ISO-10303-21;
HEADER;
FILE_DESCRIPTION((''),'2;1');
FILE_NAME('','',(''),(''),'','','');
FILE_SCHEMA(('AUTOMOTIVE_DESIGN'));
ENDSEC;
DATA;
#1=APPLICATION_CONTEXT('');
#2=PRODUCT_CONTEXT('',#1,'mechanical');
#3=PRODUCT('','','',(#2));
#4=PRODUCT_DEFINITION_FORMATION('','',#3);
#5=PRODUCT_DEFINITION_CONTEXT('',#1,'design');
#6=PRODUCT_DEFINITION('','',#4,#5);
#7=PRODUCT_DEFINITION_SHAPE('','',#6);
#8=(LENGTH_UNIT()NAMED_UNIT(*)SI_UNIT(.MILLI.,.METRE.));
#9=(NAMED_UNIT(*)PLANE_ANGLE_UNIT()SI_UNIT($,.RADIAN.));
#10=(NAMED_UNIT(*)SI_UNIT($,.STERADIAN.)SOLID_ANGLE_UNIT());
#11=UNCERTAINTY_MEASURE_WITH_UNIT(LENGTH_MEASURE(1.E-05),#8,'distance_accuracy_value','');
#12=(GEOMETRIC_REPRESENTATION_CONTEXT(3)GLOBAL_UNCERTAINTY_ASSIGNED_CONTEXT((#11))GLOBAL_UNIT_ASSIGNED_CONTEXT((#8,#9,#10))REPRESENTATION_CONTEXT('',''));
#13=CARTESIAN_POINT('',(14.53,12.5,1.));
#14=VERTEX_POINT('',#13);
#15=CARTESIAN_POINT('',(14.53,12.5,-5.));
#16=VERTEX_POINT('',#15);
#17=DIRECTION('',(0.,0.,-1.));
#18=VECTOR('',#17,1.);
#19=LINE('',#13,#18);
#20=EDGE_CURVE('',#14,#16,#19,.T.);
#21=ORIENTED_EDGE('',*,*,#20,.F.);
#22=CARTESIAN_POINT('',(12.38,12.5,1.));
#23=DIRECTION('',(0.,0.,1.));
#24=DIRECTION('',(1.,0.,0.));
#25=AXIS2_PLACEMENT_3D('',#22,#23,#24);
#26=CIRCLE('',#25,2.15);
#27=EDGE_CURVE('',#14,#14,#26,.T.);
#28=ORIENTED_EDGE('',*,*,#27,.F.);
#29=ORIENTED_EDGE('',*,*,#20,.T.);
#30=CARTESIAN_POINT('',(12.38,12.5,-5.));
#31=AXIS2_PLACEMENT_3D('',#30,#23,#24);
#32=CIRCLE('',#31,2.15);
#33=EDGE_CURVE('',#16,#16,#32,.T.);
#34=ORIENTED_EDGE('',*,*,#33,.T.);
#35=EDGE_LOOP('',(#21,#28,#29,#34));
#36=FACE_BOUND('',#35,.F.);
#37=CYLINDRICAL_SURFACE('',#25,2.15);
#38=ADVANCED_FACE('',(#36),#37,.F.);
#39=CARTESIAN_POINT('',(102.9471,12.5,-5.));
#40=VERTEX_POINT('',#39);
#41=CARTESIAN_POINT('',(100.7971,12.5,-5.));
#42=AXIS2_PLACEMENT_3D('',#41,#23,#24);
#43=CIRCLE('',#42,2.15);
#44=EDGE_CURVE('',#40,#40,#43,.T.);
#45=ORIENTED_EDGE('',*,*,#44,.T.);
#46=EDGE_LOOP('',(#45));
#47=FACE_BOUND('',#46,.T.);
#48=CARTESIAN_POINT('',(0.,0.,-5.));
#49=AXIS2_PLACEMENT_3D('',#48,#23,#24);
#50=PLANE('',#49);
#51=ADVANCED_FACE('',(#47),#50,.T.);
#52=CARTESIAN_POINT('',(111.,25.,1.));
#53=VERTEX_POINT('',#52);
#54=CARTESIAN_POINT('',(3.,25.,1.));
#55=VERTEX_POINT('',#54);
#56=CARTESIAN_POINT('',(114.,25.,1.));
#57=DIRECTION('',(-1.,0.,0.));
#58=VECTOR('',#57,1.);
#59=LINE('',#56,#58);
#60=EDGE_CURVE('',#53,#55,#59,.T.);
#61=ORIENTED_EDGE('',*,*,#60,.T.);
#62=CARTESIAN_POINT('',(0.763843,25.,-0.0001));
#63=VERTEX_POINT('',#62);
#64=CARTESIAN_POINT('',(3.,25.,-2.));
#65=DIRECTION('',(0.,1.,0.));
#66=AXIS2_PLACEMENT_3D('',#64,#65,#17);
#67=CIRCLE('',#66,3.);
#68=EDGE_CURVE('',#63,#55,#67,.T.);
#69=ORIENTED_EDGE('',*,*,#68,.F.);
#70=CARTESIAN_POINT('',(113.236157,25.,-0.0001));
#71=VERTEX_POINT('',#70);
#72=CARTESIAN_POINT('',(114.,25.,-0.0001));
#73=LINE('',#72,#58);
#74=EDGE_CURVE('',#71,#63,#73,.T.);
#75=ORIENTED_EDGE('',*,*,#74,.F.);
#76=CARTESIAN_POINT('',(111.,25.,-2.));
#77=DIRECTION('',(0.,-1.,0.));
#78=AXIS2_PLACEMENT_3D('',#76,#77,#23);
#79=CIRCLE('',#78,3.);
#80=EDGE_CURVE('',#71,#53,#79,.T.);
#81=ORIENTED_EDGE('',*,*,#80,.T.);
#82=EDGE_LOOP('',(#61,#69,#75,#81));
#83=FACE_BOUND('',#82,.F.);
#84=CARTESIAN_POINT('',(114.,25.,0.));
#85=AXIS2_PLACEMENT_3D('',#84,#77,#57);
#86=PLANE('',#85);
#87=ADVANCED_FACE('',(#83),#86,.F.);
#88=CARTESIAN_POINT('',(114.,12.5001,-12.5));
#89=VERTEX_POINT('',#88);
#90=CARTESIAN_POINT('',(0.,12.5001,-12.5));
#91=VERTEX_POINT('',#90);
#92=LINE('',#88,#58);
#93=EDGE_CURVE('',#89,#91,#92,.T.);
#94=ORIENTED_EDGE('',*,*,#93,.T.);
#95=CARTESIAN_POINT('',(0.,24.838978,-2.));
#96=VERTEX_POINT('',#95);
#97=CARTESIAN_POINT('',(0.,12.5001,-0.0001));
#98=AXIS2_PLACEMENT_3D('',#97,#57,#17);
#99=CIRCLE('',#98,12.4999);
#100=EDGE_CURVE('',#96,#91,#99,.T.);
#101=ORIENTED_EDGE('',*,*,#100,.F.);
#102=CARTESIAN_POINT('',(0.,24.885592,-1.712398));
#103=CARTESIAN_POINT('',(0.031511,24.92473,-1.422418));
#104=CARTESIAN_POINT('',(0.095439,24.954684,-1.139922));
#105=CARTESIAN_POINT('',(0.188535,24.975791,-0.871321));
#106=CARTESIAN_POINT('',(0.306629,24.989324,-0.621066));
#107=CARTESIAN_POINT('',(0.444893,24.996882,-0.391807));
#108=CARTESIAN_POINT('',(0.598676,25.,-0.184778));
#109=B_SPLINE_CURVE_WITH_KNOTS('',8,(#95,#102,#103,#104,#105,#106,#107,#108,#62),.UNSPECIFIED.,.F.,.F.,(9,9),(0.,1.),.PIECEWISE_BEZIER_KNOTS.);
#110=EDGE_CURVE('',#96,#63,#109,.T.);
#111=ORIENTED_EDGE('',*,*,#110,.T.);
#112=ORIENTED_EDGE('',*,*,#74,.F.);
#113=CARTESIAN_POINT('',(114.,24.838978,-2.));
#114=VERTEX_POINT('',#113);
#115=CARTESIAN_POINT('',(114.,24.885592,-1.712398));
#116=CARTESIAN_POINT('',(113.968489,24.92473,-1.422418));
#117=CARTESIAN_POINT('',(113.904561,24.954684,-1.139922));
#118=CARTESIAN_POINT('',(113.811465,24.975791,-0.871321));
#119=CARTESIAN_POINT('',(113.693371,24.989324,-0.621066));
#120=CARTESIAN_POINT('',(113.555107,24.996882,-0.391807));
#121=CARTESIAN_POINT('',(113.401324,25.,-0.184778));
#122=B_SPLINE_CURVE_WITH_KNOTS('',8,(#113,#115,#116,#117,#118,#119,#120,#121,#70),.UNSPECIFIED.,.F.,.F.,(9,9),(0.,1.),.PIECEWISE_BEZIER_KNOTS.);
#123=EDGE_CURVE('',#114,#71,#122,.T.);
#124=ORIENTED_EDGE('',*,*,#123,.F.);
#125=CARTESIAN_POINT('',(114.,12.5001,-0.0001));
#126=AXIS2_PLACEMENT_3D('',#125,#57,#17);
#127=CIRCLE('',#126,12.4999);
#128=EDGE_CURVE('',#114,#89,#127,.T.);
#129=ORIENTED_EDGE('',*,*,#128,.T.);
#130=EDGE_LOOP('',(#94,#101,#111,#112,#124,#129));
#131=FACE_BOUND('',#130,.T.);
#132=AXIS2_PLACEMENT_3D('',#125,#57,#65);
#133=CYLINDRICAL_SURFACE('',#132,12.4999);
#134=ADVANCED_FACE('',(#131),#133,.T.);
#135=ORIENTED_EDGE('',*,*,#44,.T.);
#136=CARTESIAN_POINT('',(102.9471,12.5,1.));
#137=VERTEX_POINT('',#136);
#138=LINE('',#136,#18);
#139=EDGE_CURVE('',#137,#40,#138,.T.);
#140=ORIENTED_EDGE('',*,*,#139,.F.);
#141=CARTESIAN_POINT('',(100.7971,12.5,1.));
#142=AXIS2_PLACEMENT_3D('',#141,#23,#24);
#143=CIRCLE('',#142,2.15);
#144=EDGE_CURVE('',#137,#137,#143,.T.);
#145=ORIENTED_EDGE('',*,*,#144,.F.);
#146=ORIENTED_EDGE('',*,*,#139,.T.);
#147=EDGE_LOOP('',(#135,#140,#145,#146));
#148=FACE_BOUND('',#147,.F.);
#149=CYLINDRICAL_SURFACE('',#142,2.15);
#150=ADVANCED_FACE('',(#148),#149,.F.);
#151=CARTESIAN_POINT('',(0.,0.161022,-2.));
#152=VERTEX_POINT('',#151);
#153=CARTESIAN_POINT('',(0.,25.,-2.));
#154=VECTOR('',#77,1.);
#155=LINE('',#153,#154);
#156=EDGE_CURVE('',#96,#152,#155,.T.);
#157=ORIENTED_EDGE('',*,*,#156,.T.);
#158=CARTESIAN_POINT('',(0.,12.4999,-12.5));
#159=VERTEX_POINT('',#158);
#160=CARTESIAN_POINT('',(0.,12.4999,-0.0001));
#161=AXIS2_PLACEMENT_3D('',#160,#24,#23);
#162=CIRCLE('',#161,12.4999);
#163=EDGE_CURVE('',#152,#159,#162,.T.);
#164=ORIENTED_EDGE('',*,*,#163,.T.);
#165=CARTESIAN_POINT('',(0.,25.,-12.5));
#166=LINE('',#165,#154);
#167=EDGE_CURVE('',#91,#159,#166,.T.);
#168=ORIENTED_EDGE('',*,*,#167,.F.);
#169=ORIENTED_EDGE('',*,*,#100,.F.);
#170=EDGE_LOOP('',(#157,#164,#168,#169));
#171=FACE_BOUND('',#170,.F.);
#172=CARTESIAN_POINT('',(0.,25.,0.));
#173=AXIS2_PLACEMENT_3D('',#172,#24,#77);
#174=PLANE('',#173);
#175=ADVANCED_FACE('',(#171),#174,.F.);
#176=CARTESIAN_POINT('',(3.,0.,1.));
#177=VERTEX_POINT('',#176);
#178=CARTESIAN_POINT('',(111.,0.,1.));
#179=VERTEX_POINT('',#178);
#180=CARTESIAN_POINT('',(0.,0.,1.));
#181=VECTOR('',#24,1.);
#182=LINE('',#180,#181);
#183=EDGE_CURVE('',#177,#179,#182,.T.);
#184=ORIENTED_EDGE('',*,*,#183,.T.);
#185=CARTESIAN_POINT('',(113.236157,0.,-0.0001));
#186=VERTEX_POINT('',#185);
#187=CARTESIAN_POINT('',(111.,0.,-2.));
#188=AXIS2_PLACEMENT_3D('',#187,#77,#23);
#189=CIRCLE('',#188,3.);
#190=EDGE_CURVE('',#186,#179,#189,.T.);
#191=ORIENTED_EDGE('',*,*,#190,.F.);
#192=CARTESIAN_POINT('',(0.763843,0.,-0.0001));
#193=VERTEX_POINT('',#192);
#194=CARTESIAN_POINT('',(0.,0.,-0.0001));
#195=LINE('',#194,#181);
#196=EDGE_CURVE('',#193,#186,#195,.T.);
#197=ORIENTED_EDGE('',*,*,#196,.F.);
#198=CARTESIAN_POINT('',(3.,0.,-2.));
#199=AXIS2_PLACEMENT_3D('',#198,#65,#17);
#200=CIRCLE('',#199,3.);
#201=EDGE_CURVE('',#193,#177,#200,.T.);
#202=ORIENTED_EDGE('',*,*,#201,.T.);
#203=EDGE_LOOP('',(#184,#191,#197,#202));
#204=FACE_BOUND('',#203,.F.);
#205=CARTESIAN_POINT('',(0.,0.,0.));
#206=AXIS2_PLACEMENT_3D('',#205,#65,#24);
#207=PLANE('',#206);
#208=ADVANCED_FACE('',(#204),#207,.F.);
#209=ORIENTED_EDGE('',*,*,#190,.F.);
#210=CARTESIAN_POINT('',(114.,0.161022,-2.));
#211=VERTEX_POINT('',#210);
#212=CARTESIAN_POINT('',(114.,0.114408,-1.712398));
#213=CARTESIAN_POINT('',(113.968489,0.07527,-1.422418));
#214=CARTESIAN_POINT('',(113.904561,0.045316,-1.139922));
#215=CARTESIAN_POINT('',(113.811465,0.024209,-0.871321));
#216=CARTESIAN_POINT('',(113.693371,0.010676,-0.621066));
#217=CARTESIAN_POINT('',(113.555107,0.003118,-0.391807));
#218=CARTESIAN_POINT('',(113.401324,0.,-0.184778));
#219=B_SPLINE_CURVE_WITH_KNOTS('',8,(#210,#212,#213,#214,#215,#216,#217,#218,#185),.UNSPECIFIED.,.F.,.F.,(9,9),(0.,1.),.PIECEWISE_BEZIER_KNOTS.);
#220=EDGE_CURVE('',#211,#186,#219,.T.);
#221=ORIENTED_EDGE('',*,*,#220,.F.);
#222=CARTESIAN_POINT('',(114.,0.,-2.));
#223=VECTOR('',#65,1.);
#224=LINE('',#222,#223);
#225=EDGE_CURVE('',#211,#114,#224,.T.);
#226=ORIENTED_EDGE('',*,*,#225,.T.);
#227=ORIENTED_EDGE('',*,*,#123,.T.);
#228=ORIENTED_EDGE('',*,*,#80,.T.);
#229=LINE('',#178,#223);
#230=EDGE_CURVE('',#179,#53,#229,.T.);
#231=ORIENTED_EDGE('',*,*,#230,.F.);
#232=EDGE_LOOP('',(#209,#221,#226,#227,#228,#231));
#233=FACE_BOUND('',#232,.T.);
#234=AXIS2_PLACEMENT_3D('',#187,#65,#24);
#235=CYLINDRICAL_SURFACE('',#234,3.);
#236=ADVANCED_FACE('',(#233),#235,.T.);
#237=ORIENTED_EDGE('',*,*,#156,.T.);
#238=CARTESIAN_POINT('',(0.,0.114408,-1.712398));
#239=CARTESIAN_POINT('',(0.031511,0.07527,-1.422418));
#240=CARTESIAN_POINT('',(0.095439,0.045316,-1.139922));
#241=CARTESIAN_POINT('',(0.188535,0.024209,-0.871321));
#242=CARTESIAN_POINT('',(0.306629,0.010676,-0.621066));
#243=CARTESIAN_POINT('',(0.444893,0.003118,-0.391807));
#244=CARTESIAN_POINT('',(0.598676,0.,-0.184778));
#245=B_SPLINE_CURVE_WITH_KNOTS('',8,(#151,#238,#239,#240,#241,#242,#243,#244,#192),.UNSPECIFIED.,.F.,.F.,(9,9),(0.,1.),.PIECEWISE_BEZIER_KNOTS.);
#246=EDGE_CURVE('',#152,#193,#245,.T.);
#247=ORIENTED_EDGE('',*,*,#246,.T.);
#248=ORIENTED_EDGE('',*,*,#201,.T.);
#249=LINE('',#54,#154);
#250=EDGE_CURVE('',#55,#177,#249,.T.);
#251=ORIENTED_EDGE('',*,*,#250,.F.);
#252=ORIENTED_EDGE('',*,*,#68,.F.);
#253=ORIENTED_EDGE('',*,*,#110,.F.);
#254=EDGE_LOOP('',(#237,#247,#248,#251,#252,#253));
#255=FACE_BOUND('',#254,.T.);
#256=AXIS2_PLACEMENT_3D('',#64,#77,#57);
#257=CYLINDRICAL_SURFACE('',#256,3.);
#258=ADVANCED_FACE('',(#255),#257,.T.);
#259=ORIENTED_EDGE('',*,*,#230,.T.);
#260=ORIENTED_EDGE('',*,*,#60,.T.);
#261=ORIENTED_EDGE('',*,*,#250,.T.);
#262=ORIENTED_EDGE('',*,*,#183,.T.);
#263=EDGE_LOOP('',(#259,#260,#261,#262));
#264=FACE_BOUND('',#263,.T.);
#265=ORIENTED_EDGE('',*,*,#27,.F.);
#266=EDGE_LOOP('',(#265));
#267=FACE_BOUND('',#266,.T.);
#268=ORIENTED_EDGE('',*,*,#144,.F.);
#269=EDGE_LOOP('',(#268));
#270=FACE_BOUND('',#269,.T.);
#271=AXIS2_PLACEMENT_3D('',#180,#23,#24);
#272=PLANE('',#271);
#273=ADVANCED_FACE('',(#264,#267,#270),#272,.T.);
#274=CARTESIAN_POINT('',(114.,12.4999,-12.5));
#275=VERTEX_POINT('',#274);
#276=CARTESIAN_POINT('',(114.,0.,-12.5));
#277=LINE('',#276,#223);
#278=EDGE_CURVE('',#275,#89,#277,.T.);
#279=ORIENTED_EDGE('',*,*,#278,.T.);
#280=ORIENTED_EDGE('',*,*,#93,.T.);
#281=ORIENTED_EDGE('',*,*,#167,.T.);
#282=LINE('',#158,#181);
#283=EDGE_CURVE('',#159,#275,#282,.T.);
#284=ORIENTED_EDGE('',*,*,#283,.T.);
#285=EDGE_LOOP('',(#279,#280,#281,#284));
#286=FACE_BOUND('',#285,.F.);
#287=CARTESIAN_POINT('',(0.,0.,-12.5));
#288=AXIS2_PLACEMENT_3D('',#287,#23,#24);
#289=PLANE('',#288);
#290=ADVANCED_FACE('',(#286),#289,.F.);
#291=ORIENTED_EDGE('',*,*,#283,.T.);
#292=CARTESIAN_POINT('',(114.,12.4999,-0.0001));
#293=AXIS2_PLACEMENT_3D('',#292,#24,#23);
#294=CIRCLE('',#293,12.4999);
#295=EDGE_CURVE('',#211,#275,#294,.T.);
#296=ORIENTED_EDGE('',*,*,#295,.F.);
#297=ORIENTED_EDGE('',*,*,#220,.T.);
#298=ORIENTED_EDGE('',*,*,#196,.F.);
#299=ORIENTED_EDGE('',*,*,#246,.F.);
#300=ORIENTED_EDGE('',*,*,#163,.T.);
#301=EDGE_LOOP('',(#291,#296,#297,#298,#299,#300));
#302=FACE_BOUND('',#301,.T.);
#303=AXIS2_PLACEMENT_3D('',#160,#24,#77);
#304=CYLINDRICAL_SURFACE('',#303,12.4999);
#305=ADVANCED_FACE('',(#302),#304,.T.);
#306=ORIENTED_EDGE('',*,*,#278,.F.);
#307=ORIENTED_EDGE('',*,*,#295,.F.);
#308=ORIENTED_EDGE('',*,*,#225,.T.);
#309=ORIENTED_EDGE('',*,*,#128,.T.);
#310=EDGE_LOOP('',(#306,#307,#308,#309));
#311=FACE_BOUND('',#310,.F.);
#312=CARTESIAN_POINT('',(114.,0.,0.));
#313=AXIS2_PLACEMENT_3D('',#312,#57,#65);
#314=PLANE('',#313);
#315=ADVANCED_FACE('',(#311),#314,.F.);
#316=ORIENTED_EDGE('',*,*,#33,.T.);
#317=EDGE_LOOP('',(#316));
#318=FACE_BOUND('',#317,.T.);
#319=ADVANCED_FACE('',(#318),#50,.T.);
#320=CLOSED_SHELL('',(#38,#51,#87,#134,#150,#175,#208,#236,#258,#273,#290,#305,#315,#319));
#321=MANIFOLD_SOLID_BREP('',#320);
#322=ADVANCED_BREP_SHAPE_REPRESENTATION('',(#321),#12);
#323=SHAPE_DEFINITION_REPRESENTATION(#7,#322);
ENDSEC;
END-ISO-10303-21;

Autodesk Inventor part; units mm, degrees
ref_plane "YZ Plane" through (0, 0, 0) normal (1, 0, 0) x (0, 1, 0)
ref_plane "XZ Plane" through (0, 0, 0) normal (0, 1, 0) x (-1, 0, 0)
ref_plane "XY Plane" through (0, 0, 0) normal (0, 0, 1) x (1, 0, 0)
sketch "Sketch1" plane through (0, 0, 0) normal (0, 0, 1) x (1, 0, 0)
  line L0 (0, 0) -> (114, 0)
  line L1 (114, 0) -> (114, 25)
  line L2 (114, 25) -> (0, 25)
  line L3 (0, 25) -> (0, 0)
  dimension "d0" = 25
  dimension "d1" = 114
extrude "Extrusion1" add sketch "Sketch1" against normal blind 12.5
fillet "Fillet1" radius 12.5 2 edges at (57, 25, -12.5) (57, 0, -12.5)
sketch "Sketch2" plane through (0, 0, 0) normal (0, 0, 1) x (1, 0, 0)
  line L0 (114, 0) -> (114, 25) projected
  line L1 (114, 25) -> (0, 25) projected
  line L2 (0, 25) -> (0, 0) projected
  line L3 (0, 0) -> (114, 0) projected
extrude "Extrusion2" add sketch "Sketch2" along normal blind 1
fillet "Fillet2" radius 3 2 edges at (0, 12.5, 1) (114, 12.5, 1)
sketch "Sketch3" plane through (0, 0, 1) normal (0, 0, 1) x (1, 0, 0)
  circle A0 centre (12.38, 6) radius 1.6 projected
  circle A1 centre (12.38, 19) radius 1.6 projected
  circle A2 centre (40.88, 12.5) radius 1.6 projected
  circle A3 centre (72.88, 12.5) radius 1.6 projected
  circle A4 centre (101.38, 6) radius 1.6 projected
  circle A5 centre (101.38, 19) radius 1.6 projected
  circle A6 centre (12.38, 19) radius 2.15
  circle A7 centre (12.38, 6) radius 2.15
  circle A8 centre (40.88, 12.5) radius 2.15
  circle A9 centre (72.88, 12.5) radius 2.15
  circle A10 centre (101.38, 19) radius 2.15
  circle A11 centre (101.38, 6) radius 2.15
  line L0 (3, 0) -> (111, 0) projected
  line L1 (111, 25) -> (3, 25) projected
  circle A12 centre (12.38, 12.5) radius 2.15
  circle A13 centre (100.7971, 12.5) radius 2.15
  point P0 (0, 0)
  dimension "d8" = 4.3
  dimension "d9" = 4.3
  dimension "d10" = 4.3
  dimension "d11" = 4.3
  dimension "d12" = 4.3
  dimension "d13" = 4.3
  dimension "d16" = 25
  dimension "d17" = 4.3
  dimension "d18" = 12.5
  dimension "d19" = 4.3
extrude "Extrusion3" cut sketch "Sketch3" against normal blind 6 contours A12 | A13
equation "\"d9\" = d8"
equation "\"d10\" = d8"
equation "\"d11\" = d8"
equation "\"d12\" = d8"
equation "\"d13\" = d8"
equation "\"d17\" = d8"
equation "\"d18\" = 0.5 * d16"
properties part number "handle_insert"
